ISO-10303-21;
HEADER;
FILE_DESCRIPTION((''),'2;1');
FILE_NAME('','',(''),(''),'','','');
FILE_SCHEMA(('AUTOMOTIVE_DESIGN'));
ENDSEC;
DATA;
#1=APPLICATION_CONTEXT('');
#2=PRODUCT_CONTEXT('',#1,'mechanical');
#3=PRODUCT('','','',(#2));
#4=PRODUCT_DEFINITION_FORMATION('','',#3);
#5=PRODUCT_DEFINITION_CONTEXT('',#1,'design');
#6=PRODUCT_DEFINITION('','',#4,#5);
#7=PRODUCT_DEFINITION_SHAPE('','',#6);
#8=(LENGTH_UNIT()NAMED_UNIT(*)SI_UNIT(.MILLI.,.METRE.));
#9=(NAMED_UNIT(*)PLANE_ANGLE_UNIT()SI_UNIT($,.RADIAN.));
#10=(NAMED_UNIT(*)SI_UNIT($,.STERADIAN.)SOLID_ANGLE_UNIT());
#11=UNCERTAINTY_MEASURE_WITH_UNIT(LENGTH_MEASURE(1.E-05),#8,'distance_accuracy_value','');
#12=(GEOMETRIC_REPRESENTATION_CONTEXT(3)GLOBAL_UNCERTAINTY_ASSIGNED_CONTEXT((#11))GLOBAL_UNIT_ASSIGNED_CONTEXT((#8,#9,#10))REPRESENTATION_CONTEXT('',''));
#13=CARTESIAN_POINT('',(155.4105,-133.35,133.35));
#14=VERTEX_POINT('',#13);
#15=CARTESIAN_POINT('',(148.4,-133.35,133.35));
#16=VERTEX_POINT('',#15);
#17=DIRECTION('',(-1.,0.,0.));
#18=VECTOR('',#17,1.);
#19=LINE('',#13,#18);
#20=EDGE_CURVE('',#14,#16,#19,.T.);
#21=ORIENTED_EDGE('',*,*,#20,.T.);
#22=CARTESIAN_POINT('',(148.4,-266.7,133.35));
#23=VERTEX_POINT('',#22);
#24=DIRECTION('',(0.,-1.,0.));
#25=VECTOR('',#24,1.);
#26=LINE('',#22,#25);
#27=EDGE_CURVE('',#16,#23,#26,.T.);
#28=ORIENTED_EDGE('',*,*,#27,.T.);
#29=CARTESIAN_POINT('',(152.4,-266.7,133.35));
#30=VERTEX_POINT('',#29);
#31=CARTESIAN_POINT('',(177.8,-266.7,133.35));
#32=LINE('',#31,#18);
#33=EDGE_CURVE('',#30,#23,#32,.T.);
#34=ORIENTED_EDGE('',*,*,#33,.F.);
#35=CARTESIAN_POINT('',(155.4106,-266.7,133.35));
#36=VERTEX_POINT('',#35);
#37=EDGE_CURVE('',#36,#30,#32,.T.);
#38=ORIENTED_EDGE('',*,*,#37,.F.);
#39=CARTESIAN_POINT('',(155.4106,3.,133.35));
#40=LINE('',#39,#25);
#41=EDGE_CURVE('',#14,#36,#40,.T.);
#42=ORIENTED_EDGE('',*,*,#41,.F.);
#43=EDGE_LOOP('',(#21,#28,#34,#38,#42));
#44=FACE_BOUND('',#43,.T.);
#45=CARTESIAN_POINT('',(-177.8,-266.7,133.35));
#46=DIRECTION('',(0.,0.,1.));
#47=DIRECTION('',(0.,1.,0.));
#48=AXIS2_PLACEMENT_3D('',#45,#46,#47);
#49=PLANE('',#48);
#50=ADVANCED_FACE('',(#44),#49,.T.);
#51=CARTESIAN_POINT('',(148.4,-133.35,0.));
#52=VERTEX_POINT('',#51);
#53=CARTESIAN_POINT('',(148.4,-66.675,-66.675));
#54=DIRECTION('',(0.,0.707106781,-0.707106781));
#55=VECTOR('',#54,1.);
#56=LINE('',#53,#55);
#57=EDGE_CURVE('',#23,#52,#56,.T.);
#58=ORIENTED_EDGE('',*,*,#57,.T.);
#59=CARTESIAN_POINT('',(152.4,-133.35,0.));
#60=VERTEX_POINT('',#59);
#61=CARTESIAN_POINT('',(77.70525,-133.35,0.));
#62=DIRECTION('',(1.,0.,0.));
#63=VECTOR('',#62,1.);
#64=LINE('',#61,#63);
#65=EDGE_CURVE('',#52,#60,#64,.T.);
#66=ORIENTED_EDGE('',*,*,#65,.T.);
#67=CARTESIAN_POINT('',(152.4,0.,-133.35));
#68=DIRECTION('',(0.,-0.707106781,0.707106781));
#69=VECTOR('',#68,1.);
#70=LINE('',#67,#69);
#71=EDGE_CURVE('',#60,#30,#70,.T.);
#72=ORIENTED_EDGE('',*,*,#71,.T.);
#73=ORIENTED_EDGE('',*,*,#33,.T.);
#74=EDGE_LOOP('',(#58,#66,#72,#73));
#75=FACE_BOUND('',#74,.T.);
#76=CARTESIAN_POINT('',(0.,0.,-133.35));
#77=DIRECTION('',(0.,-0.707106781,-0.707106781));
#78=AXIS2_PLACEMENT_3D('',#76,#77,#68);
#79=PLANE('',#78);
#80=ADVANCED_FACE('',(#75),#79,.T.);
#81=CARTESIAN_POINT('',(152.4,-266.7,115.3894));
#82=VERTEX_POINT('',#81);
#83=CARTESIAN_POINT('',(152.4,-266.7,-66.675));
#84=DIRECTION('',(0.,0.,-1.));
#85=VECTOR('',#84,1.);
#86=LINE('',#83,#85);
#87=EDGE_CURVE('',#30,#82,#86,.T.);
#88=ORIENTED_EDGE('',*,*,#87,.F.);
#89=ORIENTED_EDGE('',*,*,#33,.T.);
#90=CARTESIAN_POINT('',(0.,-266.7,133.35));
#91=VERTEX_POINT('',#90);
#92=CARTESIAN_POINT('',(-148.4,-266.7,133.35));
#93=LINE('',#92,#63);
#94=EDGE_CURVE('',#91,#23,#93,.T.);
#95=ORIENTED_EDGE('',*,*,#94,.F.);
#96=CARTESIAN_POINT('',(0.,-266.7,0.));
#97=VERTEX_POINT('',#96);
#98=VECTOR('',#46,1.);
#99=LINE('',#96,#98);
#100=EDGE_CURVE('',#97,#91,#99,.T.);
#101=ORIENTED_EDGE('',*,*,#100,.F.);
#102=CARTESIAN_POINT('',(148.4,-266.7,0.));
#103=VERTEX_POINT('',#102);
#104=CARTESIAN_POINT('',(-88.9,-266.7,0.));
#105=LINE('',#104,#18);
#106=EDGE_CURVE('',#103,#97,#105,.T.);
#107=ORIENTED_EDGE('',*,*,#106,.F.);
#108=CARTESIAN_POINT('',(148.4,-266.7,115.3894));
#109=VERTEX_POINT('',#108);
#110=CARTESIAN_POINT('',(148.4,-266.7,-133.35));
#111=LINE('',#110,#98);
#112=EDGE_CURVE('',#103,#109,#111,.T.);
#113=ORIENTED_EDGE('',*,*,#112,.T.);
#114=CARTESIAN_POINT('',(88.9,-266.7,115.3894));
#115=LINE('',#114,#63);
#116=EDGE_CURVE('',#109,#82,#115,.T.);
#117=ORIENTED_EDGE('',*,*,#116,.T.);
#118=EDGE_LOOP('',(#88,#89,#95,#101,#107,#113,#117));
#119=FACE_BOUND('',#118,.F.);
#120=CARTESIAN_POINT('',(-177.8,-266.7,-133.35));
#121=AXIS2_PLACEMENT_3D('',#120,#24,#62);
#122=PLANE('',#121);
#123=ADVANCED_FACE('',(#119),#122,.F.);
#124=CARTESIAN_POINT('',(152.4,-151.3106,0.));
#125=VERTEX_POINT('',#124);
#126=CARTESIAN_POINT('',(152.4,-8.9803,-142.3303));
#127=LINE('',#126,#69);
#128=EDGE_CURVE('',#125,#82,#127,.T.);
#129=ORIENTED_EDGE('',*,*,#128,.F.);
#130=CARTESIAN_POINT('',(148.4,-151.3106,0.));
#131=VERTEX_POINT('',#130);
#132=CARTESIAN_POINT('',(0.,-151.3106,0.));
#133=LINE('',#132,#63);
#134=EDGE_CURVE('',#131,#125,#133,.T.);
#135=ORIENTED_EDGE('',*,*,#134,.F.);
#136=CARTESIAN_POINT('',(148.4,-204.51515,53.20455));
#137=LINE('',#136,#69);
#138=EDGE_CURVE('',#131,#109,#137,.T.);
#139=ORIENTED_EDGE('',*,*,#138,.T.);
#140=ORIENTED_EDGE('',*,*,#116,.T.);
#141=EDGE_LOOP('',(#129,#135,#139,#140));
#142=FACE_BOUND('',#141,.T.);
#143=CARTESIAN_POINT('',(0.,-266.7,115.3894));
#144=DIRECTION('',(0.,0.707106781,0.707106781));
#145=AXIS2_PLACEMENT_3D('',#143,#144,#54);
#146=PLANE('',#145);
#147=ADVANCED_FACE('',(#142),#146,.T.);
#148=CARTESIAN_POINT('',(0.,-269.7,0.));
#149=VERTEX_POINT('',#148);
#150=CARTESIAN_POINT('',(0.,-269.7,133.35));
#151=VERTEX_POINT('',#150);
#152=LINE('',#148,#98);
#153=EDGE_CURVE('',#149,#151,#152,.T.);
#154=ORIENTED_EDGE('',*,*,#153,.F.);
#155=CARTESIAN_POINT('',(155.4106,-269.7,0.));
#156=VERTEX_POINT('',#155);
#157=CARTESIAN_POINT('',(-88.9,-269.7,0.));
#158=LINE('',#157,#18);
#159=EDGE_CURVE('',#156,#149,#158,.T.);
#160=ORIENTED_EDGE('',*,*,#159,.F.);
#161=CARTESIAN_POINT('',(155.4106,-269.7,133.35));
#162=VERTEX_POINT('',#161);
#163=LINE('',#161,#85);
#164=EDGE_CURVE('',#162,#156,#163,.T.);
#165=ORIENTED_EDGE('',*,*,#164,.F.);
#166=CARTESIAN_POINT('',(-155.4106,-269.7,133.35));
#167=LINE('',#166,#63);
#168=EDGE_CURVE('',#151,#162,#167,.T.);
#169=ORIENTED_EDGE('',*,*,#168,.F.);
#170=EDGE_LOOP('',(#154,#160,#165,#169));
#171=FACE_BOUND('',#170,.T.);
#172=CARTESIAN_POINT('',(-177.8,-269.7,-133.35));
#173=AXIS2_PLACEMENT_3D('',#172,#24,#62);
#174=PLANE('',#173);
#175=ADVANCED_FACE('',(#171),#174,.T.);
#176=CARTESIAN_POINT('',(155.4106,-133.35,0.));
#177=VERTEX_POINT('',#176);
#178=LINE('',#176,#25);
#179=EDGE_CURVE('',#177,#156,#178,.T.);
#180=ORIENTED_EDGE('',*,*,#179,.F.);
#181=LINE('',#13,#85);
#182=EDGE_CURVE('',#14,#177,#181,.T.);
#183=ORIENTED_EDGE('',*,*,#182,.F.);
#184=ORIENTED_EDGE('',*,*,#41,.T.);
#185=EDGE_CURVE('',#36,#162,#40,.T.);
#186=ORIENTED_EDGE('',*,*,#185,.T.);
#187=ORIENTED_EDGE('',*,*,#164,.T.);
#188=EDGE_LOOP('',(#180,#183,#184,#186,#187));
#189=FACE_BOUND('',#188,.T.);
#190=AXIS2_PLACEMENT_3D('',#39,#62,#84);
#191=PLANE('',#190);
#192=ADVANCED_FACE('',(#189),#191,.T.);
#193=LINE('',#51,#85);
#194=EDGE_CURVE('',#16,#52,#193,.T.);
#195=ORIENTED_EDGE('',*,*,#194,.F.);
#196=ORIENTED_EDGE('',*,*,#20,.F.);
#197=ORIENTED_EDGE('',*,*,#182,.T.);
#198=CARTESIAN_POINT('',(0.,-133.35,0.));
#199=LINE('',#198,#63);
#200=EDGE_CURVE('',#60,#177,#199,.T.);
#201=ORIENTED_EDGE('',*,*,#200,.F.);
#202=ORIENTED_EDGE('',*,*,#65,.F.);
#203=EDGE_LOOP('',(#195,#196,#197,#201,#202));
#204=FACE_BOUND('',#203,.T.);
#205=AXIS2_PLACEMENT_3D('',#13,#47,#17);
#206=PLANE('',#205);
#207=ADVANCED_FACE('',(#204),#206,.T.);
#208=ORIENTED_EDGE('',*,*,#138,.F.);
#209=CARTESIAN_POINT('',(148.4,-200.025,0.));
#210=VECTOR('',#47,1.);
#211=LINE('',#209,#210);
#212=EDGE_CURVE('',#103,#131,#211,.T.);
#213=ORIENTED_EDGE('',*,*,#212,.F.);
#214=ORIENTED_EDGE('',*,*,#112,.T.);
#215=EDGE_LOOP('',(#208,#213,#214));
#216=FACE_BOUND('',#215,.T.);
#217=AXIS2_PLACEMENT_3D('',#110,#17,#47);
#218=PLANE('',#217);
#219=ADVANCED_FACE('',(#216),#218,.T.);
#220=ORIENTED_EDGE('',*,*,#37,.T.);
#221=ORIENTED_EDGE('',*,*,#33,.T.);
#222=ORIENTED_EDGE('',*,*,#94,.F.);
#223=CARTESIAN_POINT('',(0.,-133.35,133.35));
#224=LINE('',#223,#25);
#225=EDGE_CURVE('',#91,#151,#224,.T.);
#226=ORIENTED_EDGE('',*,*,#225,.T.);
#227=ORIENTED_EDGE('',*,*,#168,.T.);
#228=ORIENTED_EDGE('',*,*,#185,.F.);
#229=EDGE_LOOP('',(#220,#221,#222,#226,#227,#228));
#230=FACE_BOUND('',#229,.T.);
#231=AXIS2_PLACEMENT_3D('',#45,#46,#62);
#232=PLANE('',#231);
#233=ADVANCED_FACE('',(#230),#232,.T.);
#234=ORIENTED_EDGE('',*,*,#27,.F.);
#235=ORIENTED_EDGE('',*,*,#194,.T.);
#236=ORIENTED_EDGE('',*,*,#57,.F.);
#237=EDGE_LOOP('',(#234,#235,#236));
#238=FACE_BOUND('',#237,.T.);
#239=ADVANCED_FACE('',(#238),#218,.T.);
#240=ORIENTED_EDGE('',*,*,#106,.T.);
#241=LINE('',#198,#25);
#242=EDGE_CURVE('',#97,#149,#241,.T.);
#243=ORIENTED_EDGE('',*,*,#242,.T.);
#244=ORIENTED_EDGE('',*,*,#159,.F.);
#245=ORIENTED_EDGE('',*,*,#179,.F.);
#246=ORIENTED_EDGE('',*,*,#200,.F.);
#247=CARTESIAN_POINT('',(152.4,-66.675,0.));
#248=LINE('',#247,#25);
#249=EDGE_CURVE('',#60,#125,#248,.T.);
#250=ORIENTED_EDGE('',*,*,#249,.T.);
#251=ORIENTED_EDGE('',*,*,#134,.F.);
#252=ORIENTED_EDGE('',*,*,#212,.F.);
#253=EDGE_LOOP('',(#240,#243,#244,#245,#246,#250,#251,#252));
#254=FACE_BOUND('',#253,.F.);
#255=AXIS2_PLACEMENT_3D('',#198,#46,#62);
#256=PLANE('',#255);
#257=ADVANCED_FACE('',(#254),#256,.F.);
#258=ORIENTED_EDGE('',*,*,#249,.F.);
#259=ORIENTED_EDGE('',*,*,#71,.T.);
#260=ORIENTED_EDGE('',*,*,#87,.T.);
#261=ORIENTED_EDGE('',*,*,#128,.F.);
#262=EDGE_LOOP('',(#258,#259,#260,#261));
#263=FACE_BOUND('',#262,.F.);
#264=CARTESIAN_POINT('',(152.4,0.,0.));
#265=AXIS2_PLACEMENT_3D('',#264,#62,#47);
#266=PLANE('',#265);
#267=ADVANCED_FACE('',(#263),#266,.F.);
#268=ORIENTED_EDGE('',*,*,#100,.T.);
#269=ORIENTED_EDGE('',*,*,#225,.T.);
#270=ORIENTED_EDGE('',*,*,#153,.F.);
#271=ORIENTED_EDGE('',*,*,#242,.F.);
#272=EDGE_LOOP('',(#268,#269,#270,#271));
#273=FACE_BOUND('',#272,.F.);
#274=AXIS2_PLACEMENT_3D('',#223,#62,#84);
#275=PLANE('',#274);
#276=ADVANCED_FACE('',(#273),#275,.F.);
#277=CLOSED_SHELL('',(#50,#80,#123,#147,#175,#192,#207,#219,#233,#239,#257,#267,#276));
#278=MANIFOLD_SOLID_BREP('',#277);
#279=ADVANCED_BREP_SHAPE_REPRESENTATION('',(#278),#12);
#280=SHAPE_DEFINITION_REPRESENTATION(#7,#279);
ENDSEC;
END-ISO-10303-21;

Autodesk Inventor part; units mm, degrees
ref_plane "YZ Plane" through (0, 0, 0) normal (1, 0, 0) x (0, 1, 0)
ref_plane "XZ Plane" through (0, 0, 0) normal (0, 1, 0) x (-1, 0, 0)
ref_plane "XY Plane" through (0, 0, 0) normal (0, 0, 1) x (1, 0, 0)
sketch "Sketch1" plane through (0, 0, 0) normal (0, 1, 0) x (-1, 0, 0)
  line L0 (110, -80) -> (-110, -80)
  line L1 (-110, -80) -> (-110, 80)
  line L2 (-110, 80) -> (110, 80)
  line L3 (110, 80) -> (110, -80)
  line L4 (320.2117, -53.5522) -> (168.036, -53.5522) construction
  line L5 (168.036, -53.5522) -> (168.036, 90.1689) construction
  line L6 (168.036, 90.1689) -> (320.2117, 90.1689) construction
  line L7 (320.2117, 90.1689) -> (320.2117, -53.5522) construction
  line L8 (124.3, -89.75) -> (-124.3, -89.75) construction
  line L9 (-124.3, -89.75) -> (-124.3, 89.75) construction
  line L10 (-124.3, 89.75) -> (124.3, 89.75) construction
  line L11 (124.3, 89.75) -> (124.3, -89.75) construction
  line L12 (124.3, -89.75) -> (-124.3, 89.75) construction
  line L13 (-124.3, -89.75) -> (124.3, 89.75) construction
  line L14 (-152.4, -107.95) -> (152.4, -107.95)
  line L15 (152.4, -107.95) -> (152.4, 107.95)
  line L16 (152.4, 107.95) -> (-152.4, 107.95)
  line L17 (-152.4, 107.95) -> (-152.4, -107.95)
  line L18 (-152.4, -107.95) -> (152.4, 107.95) construction
  line L19 (152.4, -107.95) -> (-152.4, 107.95) construction
  line L20 (177.8, 133.35) -> (177.8, -133.35)
  line L21 (177.8, -133.35) -> (-177.8, -133.35)
  line L22 (-177.8, -133.35) -> (-177.8, 133.35)
  line L23 (-177.8, 133.35) -> (177.8, 133.35)
  point P0 (0, 0)
  dimension "d11" = 220
  dimension "d12" = 160
  dimension "d15" = 248.6
  dimension "d16" = 179.5
  dimension "d18" = 304.8
  dimension "d19" = 215.9
  dimension "d22" = 25.4
extrude "Top" add sketch "Sketch1" along normal blind 25.4 contours L17 L16 L15 L14 | L20 L21 L22 L23
sketch "Sketch3" plane through (177.8, 0, 133.35) normal (1, 0, 0) x (0, 0, -1)
  line L0 (0, 0) -> (0, 25.4) projected
  line L1 (266.7, 0) -> (266.7, 25.4) projected
  line L2 (0, 0) -> (266.7, 0)
  line L3 (266.7, 0) -> (266.7, -266.7)
  line L4 (266.7, -266.7) -> (0, -266.7)
  line L5 (0, -266.7) -> (0, 0)
  point P0 (133.35, 0)
  dimension "d25" = 266.7
extrude "Right" add sketch "Sketch3" against normal blind 50.8
sketch "Sketch4" plane through (-177.8, 0, -133.35) normal (-1, 0, 0) x (0, 0, 1)
  line L0 (0, 0) -> (0, 25.4) projected
  line L1 (266.7, -266.7) -> (266.7, 0) projected
  line L2 (0, 0) -> (266.7, 0)
  line L3 (266.7, 0) -> (266.7, -266.7)
  line L4 (266.7, -266.7) -> (0, -266.7)
  line L5 (0, -266.7) -> (0, 0)
  point P0 (133.35, 0)
  dimension "d28" = 266.7
extrude "Left" add sketch "Sketch4" against normal blind 50.8
sketch "Sketch5" plane through (0, 0, 0) normal (1, 0, 0) x (0, 1, 0)
  line L0 (-266.7, -133.35) -> (25.4, -133.35) projected
  line L1 (-266.7, 133.35) -> (-266.7, -133.35) projected
  line L2 (0, -133.35) -> (-266.7, 133.35)
  line L3 (-266.7, 133.35) -> (-275.6803, 124.3697)
  line L4 (-275.6803, 124.3697) -> (-8.9803, -142.3303)
  line L5 (-8.9803, -142.3303) -> (0, -133.35)
  point P0 (0, 0)
  dimension "d31" = 12.7
extrude "Plexiglass Cut" cut sketch "Sketch5" along normal mid plane 304.8 contours L4 L1 L2 L0 | L0 L5 L4 | L4 L3 L1
sketch "Sketch6" plane through (-177.8, -266.7, -133.35) normal (0, -1, 0) x (1, 0, 0)
  line L0 (0, 0) -> (0, 266.7) projected
  line L1 (355.6, 0) -> (0, 0) projected
  line L2 (0, 266.7) -> (355.6, 266.7)
  line L3 (355.6, 266.7) -> (355.6, 0)
  line L4 (355.6, 0) -> (0, 0)
  line L5 (0, 0) -> (0, 266.7)
  point P0 (177.8, 133.35)
extrude "Bottom" add sketch "Sketch6" along normal blind 25.4
sketch "Sketch9" plane through (0, 25.4, 0) normal (0, 1, 0) x (1, 0, 0)
  line L0 (177.8, -133.35) -> (127, -133.35) projected
  line L1 (177.8, 133.35) -> (-177.8, 133.35) projected
  line L2 (177.8, -133.35) -> (-177.8, -133.35)
  line L3 (-177.8, -133.35) -> (-177.8, 133.35)
  line L4 (-177.8, 133.35) -> (177.8, 133.35)
  line L5 (177.8, 133.35) -> (177.8, -133.35)
  point P0 (0, 0)
extrude "Top Flattening" cut sketch "Sketch9" against normal blind 22.4
sketch "Sketch10" plane through (0, 3, 0) normal (0, 1, 0) x (1, 0, 0)
  line L0 (-177.8, -133.35) -> (-177.8, 133.35) projected
  line L1 (-155.4106, 133.35) -> (-177.8, 133.35)
  line L2 (-177.8, 133.35) -> (-177.8, -133.35)
  line L3 (-177.8, -133.35) -> (-155.4106, -133.35)
  line L4 (-155.4106, -133.35) -> (-155.4106, 133.35)
  line L5 (177.8, 133.35) -> (177.8, -133.35)
  line L6 (177.8, -133.35) -> (155.4106, -133.35)
  line L7 (155.4106, -133.35) -> (155.4106, 133.35)
  line L8 (155.4106, 133.35) -> (177.8, 133.35)
  line L9 (152.4, -115.3895) -> (152.4, 133.35) projected
  point P0 (0, 0)
  point P1 (-177.8, 0)
  dimension "d48" = 22.3894
  dimension "d49" = 22.3894
extrude "Outer Side Flattening" cut sketch "Sketch10" against normal through all
sketch "Sketch11" plane through (-177.8, -292.1, -133.35) normal (0, -1, 0) x (1, 0, 0)
  line L0 (22.3894, 0) -> (333.2106, 0) projected
  line L1 (333.2106, 0) -> (22.3894, 0)
  line L2 (22.3894, 0) -> (22.3894, 266.7)
  line L3 (22.3894, 266.7) -> (333.2106, 266.7)
  line L4 (333.2106, 266.7) -> (333.2106, 0)
  point P0 (177.8, 133.35)
extrude "Bottom Flattening" cut sketch "Sketch11" against normal blind 22.4
sketch "Sketch12" plane through (155.4106, 3, -133.35) normal (0, 0, -1) x (-1, 0, 0)
  line L0 (155.4106, -3) -> (155.4106, -269.7) construction
  line L1 (7.0106, -269.7) -> (7.0106, -3)
  line L2 (7.0106, -3) -> (303.8106, -3)
  line L3 (303.8106, -3) -> (303.8106, -269.7)
  line L4 (303.8106, -269.7) -> (7.0106, -269.7)
  line L5 (7.0106, -269.7) -> (303.8106, -3) construction
  line L6 (7.0106, -3) -> (303.8106, -269.7) construction
  point P0 (155.4106, -136.35)
  point P1 (155.4106, -3)
  dimension "d54" = 296.8
extrude "Inner Flattening" cut sketch "Sketch12" against normal through all
sketch "Sketch13" plane through (-155.4106, 3, 133.35) normal (0, 0, 1) x (1, 0, 0)
  line L0 (310.8211, -272.7) -> (310.8211, 0) projected
  line L1 (0, -272.7) -> (0, 0) projected
  line L2 (310.8211, -136.35) -> (0, -136.35)
  line L3 (0, -136.35) -> (0, 0)
  line L4 (0, 0) -> (310.8211, 0)
  line L5 (310.8211, 0) -> (310.8211, -136.35)
  point P0 (155.4106, -3)
  point P1 (310.8211, 0)
  point P2 (0, -136.35)
extrude "Top Cut" cut sketch "Sketch13" against normal through all
sketch "Sketch14" plane through (-155.4106, -133.35, 133.35) normal (0, 1, 0) x (1, 0, 0)
  line L0 (310.8212, 0) -> (303.8106, 0) projected
  line L1 (155.4106, 133.35) -> (310.8212, 133.35)
  line L2 (310.8212, 133.35) -> (310.8212, 0)
  line L3 (310.8212, 0) -> (155.4106, 0)
  line L4 (155.4106, 0) -> (155.4106, 133.35)
  line L5 (310.8211, 266.7) -> (0, 266.7) projected
  line L6 (310.8212, 0) -> (0, 0)
  line L7 (0, 0) -> (0, 266.7)
  line L8 (0, 266.7) -> (310.8212, 266.7)
  line L9 (310.8212, 266.7) -> (310.8212, 0)
extrude "Quarter Cut" cut sketch "Sketch14" against normal through all contours L1 L4 L6 L7 L5 L9
properties part number "Apple iPad 2022 Hologram"
